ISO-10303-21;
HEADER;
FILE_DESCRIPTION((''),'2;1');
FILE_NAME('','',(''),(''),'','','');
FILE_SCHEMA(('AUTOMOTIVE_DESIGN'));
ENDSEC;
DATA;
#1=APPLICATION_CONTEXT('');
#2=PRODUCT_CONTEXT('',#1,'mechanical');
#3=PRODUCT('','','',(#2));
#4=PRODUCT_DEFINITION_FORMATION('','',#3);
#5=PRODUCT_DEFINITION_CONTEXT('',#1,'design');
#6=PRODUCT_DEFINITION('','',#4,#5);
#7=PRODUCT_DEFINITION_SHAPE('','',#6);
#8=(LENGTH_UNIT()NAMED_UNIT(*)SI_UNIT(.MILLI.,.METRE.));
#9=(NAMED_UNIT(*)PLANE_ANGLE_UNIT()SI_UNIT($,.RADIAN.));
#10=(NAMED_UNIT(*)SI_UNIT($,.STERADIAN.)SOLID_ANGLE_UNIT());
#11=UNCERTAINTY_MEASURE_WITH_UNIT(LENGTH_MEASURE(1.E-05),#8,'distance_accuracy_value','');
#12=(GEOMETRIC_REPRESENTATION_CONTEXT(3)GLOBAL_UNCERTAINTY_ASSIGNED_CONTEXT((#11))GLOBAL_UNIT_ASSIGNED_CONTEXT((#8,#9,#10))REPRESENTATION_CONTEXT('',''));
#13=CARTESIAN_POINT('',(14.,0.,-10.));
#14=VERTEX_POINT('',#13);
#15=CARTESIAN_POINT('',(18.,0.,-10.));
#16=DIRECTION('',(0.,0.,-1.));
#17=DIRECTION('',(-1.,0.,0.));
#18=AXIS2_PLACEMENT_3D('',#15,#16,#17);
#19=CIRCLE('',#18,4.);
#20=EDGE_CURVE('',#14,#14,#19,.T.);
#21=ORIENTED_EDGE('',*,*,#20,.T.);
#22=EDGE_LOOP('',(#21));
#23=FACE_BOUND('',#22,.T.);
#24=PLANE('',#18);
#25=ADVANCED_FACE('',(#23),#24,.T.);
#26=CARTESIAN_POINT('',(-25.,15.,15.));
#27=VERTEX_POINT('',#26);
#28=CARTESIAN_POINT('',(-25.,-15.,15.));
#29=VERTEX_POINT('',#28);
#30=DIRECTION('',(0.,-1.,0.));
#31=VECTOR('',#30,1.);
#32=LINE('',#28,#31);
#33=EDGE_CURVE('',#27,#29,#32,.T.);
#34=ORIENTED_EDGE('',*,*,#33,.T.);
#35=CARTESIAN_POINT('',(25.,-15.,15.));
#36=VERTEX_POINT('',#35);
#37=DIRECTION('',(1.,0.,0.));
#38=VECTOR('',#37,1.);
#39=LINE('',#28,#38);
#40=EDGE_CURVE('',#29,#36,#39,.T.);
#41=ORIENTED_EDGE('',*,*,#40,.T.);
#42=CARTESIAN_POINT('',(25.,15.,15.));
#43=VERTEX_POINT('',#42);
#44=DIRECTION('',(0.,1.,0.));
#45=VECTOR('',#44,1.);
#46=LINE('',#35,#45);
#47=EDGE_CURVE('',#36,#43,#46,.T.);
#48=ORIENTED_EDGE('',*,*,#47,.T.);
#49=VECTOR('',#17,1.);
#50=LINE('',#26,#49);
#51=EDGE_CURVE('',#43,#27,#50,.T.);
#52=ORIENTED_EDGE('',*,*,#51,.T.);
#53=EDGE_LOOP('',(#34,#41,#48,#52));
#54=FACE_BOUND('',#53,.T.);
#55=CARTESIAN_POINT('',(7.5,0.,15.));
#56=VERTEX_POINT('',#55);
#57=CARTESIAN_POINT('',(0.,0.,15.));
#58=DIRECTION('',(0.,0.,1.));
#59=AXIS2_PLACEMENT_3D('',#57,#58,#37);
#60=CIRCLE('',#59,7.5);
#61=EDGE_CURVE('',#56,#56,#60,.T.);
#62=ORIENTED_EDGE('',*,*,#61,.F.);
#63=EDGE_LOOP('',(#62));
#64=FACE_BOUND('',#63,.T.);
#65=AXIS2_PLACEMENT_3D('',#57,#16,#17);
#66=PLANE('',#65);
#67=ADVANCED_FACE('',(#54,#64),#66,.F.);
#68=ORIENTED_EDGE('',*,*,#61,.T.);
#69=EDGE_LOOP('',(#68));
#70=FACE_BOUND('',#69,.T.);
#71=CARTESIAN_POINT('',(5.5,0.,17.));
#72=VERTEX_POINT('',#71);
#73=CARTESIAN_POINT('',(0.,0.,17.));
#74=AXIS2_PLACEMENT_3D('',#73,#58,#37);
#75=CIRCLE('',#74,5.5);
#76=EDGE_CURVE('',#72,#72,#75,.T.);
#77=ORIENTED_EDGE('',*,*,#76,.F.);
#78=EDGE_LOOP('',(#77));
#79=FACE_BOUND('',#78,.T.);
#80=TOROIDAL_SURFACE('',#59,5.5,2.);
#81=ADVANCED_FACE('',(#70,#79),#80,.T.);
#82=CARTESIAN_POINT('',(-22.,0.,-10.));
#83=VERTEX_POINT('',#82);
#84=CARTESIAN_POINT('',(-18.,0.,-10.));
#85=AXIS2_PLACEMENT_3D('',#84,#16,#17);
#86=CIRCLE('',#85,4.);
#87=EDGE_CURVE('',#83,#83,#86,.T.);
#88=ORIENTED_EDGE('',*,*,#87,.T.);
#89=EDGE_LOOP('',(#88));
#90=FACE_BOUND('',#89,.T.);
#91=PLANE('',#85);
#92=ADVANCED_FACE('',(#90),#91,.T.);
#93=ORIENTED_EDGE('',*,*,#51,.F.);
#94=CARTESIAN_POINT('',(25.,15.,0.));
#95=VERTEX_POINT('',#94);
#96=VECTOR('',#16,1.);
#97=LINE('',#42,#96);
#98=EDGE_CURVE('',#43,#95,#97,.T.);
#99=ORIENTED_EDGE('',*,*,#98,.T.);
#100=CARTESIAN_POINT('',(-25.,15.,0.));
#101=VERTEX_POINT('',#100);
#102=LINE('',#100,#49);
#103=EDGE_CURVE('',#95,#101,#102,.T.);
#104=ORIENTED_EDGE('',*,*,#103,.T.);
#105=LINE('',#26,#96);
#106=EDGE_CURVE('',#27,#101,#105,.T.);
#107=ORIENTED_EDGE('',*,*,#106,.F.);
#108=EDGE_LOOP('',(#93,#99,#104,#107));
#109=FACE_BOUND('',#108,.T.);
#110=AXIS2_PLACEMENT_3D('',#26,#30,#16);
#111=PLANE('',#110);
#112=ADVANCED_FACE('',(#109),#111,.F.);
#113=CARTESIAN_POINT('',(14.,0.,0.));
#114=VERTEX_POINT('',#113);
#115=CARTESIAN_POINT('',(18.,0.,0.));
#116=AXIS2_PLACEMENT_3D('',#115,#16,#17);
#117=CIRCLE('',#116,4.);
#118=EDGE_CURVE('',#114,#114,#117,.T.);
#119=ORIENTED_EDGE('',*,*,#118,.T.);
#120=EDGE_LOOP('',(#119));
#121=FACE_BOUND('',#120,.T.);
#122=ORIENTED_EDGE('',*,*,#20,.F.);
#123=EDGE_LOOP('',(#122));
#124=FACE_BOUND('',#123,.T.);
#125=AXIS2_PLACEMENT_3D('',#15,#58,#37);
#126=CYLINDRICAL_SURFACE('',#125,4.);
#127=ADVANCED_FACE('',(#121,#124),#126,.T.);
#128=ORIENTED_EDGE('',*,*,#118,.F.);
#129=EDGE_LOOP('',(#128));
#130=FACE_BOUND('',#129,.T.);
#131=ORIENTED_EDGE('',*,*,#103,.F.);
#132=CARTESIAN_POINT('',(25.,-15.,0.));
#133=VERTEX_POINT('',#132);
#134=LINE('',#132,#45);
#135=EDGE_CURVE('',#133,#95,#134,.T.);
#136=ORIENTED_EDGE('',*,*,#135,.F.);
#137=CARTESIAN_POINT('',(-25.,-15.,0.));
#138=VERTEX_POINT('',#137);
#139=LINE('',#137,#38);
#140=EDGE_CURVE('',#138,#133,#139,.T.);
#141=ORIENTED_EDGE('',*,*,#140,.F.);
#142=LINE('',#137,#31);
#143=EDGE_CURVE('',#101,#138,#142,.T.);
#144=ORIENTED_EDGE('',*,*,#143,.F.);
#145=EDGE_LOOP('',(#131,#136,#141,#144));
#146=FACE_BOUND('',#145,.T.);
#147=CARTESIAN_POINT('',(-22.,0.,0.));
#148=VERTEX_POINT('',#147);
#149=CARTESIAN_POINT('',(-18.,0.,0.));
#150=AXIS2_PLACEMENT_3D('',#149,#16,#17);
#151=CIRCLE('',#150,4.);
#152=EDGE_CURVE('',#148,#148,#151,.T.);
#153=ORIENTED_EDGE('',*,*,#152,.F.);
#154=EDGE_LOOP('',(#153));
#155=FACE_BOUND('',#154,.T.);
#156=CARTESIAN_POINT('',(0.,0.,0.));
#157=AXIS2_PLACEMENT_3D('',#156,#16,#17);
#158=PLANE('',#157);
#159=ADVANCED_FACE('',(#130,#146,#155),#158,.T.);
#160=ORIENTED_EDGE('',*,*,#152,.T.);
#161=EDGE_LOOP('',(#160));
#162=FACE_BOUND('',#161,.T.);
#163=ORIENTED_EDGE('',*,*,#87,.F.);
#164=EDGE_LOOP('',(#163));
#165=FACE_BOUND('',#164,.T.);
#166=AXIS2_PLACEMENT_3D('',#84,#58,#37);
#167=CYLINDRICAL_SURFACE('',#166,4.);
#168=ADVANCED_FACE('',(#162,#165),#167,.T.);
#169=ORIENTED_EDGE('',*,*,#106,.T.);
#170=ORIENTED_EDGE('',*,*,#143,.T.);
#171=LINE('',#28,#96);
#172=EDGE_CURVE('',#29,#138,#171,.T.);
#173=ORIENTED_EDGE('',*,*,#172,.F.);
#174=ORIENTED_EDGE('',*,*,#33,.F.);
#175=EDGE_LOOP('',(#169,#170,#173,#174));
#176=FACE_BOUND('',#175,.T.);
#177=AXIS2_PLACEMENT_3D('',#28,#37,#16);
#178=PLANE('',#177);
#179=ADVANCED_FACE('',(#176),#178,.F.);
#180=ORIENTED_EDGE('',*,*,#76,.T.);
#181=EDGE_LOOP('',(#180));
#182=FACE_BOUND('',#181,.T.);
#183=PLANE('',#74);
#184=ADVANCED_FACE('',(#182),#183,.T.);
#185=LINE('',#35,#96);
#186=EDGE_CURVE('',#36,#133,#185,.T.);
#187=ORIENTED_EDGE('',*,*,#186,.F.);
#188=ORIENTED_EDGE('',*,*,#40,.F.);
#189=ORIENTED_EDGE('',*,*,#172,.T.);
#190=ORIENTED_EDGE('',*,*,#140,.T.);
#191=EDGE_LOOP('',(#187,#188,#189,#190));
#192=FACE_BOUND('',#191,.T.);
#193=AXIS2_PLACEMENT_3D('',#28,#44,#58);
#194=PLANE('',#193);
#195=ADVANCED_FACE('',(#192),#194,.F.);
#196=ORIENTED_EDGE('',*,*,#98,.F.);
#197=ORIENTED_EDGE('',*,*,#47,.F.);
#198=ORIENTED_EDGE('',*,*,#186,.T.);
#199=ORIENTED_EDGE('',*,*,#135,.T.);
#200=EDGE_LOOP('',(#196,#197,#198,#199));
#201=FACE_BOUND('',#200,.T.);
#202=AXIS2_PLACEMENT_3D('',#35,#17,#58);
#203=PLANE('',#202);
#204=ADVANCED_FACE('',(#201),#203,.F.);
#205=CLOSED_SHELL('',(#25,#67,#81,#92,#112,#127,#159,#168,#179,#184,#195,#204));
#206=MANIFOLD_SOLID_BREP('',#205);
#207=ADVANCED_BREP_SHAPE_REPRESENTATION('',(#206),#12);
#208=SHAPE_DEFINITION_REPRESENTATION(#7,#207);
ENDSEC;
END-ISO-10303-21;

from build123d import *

# Parameters (mm, degrees)
SKETCH1_W           = 50
SKETCH1_H           = 30
BOSS_EXTRUDE1_DEPTH = 15
SKETCH2_R           = 4
BOSS_EXTRUDE2_DEPTH = 10
SKETCH3_R           = 7.5
BOSS_EXTRUDE3_DEPTH = 2
FILLET1_R           = 2


with BuildPart() as part:
    # Sketch1 → Boss-Extrude1 (new body)
    with BuildSketch(Plane.XY):
        Rectangle(SKETCH1_W, SKETCH1_H)
    extrude(amount=BOSS_EXTRUDE1_DEPTH)

    # Sketch2 → Boss-Extrude2 (add)
    with BuildSketch(Plane(origin=(0, 0, 0), x_dir=(-1, 0, 0), z_dir=(0, 0, -1))):
        with Locations((-18, 0)):
            Circle(SKETCH2_R)
        with Locations((18, 0)):
            Circle(SKETCH2_R)
    extrude(amount=BOSS_EXTRUDE2_DEPTH)

    # Sketch3 → Boss-Extrude3 (add)
    with BuildSketch(Plane.XY.offset(15)):
        Circle(SKETCH3_R)
    extrude(amount=BOSS_EXTRUDE3_DEPTH)

    # Fillet1
    fillet1_edges = [part.edges().sort_by_distance(p)[0] for p in [
        (-7.5, 0, 17),
    ]]
    fillet(fillet1_edges, radius=FILLET1_R - 0.0001)  # a hair under: the kernel refuses the full size


solid = part.part
